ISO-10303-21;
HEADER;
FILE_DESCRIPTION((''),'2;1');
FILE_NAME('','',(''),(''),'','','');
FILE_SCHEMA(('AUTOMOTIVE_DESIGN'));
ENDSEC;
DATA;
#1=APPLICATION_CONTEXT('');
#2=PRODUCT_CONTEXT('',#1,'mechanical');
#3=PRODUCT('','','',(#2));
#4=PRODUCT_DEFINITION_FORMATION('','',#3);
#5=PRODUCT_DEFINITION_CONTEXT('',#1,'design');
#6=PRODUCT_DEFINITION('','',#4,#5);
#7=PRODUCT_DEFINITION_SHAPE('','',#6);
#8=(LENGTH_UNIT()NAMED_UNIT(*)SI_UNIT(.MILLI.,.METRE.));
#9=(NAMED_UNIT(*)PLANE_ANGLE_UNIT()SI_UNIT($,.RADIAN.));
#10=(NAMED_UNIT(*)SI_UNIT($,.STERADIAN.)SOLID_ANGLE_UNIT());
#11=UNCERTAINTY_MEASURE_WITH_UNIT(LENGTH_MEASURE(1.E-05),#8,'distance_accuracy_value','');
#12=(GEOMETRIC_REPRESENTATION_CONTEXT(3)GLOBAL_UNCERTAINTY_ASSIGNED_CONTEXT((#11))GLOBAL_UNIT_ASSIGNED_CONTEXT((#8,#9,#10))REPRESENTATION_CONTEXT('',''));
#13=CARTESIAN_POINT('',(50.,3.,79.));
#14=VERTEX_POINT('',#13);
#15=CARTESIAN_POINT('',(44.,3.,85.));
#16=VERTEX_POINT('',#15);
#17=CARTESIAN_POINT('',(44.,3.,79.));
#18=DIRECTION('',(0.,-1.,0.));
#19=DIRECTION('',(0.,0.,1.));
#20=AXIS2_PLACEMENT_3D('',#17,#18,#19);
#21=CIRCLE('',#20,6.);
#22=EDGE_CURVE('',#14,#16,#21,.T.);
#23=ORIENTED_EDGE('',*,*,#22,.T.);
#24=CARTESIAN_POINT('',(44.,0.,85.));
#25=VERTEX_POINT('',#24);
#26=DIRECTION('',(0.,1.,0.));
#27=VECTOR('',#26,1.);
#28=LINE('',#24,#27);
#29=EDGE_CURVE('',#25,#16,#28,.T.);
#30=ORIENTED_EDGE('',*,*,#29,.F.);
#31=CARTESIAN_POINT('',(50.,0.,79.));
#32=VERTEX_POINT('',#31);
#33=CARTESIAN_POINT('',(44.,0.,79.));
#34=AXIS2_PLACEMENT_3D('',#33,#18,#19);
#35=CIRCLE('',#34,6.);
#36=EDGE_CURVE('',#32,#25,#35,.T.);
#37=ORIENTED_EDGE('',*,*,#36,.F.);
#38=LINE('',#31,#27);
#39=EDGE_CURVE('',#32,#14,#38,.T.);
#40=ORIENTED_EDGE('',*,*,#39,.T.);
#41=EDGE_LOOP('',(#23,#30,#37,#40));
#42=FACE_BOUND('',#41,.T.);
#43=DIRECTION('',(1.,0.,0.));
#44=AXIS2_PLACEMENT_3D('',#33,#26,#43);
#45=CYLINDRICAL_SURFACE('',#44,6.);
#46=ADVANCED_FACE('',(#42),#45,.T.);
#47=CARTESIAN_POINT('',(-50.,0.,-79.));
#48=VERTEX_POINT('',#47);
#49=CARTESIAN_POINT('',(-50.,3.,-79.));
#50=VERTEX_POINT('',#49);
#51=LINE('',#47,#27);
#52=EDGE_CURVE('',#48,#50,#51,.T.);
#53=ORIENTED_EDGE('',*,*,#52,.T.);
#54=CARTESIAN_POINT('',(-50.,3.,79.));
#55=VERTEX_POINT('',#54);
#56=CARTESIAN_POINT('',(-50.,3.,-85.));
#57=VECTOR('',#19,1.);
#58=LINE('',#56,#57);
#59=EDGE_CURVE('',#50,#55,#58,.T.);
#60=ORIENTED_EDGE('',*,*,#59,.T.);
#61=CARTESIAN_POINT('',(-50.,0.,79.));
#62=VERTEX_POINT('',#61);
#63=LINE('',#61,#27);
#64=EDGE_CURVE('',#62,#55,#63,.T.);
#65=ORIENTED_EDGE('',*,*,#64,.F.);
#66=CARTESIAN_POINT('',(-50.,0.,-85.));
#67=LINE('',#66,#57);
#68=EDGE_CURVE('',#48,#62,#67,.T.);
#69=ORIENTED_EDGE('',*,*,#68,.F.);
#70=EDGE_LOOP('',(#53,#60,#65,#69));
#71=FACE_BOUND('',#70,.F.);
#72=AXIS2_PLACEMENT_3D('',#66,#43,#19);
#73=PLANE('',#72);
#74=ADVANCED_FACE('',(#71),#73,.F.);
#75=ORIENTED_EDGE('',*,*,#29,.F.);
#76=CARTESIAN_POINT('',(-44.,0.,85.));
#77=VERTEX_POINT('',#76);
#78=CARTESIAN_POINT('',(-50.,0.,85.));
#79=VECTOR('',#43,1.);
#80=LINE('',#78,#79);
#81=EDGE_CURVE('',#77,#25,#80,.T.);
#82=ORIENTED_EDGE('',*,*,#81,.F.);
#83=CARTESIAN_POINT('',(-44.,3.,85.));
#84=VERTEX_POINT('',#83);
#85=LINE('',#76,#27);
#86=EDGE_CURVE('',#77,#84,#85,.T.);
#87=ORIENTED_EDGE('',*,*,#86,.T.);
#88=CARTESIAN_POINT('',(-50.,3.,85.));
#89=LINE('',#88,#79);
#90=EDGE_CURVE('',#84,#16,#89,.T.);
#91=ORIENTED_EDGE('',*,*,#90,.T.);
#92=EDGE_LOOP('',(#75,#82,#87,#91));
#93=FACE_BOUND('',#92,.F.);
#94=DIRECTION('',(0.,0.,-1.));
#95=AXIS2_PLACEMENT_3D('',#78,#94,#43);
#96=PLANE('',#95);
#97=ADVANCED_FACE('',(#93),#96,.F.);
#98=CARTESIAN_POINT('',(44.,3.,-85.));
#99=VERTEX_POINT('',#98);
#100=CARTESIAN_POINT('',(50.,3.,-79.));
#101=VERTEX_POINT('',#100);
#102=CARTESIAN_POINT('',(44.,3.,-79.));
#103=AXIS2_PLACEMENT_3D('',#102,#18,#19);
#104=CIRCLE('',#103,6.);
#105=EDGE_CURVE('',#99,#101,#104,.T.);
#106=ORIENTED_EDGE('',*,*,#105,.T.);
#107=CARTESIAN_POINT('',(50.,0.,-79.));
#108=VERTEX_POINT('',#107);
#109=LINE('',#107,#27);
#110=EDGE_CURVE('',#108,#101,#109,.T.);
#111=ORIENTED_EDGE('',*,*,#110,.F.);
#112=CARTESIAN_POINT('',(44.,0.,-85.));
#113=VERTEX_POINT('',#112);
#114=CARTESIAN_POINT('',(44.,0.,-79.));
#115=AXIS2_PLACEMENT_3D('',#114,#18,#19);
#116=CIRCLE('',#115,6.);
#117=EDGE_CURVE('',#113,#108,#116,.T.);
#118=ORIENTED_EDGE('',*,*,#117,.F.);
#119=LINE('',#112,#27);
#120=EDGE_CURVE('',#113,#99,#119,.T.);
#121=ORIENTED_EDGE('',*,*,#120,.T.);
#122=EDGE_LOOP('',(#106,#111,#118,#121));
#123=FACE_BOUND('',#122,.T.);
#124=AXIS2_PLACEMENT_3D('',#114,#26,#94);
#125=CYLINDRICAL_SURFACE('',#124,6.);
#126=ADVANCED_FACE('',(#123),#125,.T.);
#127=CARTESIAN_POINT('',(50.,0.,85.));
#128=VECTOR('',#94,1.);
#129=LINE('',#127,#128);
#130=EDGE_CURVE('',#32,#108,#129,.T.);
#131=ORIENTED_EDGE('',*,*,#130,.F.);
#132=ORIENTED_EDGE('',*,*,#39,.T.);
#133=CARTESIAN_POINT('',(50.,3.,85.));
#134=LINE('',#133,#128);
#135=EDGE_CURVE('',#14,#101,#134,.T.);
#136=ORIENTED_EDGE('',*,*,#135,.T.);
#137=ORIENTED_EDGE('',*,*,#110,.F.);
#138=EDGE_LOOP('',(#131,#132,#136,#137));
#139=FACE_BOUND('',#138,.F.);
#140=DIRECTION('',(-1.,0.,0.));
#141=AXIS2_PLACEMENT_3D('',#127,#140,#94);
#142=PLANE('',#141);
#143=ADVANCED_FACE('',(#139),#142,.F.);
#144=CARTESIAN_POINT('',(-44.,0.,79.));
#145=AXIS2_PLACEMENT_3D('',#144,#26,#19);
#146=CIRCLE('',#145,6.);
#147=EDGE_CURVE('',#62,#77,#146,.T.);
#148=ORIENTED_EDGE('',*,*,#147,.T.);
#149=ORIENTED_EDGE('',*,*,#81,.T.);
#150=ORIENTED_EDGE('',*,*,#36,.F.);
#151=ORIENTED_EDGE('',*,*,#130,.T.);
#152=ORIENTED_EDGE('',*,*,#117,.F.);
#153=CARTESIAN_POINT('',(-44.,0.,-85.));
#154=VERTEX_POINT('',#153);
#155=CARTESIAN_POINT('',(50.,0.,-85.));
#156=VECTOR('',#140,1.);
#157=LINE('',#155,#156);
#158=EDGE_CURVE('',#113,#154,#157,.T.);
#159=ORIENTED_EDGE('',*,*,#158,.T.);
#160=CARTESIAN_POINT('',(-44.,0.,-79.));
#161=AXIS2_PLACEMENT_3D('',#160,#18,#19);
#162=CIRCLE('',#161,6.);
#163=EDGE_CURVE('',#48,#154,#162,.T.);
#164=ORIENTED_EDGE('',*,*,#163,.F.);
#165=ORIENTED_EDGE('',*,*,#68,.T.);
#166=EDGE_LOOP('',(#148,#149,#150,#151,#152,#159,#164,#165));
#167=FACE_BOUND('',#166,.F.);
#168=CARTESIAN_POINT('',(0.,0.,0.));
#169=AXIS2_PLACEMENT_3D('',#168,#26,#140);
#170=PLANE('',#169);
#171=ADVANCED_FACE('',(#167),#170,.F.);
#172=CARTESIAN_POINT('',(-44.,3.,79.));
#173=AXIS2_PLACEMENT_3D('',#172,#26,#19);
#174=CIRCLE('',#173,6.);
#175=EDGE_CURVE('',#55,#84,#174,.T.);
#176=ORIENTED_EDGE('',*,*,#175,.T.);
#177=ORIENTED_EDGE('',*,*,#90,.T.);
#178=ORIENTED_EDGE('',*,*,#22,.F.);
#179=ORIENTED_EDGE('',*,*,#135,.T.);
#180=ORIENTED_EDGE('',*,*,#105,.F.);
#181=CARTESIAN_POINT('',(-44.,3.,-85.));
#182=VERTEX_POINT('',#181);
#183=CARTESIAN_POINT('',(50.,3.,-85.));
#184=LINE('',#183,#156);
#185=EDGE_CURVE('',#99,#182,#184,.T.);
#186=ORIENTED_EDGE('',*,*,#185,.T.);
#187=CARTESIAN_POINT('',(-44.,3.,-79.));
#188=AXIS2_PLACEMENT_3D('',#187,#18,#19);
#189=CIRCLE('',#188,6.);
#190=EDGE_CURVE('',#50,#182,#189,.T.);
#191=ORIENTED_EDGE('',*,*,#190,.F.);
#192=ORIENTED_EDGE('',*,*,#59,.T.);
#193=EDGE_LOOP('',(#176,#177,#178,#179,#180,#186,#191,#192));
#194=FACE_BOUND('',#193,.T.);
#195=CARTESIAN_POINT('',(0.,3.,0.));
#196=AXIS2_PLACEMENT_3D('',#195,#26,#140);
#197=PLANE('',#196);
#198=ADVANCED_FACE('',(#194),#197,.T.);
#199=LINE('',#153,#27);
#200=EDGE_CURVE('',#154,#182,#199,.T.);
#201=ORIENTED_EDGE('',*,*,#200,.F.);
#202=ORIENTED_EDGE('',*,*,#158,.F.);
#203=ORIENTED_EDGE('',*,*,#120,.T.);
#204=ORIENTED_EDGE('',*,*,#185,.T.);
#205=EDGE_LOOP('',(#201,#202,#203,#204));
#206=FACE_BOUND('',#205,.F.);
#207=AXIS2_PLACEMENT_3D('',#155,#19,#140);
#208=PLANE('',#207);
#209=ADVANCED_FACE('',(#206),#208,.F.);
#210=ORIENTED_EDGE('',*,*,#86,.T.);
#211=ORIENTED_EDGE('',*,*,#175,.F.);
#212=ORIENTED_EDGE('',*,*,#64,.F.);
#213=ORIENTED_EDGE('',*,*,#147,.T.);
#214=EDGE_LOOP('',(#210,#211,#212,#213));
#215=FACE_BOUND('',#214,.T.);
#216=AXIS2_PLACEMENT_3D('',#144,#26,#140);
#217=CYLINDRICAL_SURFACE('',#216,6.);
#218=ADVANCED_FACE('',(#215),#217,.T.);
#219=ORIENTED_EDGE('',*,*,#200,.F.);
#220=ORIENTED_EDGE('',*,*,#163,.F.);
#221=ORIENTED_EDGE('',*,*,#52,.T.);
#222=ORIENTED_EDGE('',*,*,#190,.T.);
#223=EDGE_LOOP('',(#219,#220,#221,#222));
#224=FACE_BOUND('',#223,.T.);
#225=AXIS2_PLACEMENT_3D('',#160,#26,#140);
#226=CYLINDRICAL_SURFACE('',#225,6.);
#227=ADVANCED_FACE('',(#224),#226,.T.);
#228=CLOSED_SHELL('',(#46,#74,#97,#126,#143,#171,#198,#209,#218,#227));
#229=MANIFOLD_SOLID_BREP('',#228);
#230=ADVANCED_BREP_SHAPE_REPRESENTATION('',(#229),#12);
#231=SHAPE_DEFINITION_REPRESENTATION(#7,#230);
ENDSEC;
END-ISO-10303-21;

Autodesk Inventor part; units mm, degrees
ref_plane "YZ Plane" through (0, 0, 0) normal (1, 0, 0) x (0, 1, 0)
ref_plane "XZ Plane" through (0, 0, 0) normal (0, 1, 0) x (-1, 0, 0)
ref_plane "XY Plane" through (0, 0, 0) normal (0, 0, 1) x (1, 0, 0)
sketch "Sketch1" plane through (0, 0, 0) normal (0, 1, 0) x (-1, 0, 0)
  line L0 (50, 85) -> (-50, 85)
  line L1 (-50, 85) -> (-50, -85)
  line L2 (-50, -85) -> (50, -85)
  line L3 (50, -85) -> (50, 85)
  line L4 (50, 85) -> (-50, -85) construction
  point P0 (0, 0)
  point P1 (0, 0)
  dimension "d0" = 100
  dimension "d1" = 170
extrude "Plate1" add sketch "Sketch1" along normal blind 3
fillet "Corner Round1" radius 6 4 edges at (50, 1.5, 85) (-50, 1.5, 85) (50, 1.5, -85) (-50, 1.5, -85)
equation "\"d2\" = Thickness"
equation "\"BendReliefWidth\" = Thickness"
equation "\"BendReliefDepth\" = 0.5 * Thickness"
equation "\"CornerReliefSize\" = 4 * Thickness"
equation "\"MinimumRemnant\" = 2 * Thickness"
equation "\"TransitionRadius\" = BendRadius"
equation "\"JacobiRadiusSize\" = BendRadius"
equation "\"GapSize\" = Thickness"
equation "\"Thickness\" = 3"
equation "\"BendRadius\" = 5"
properties part number "MSC 905 FLANGE BASE TUBE SUPPORT" material "Stainless Steel"
